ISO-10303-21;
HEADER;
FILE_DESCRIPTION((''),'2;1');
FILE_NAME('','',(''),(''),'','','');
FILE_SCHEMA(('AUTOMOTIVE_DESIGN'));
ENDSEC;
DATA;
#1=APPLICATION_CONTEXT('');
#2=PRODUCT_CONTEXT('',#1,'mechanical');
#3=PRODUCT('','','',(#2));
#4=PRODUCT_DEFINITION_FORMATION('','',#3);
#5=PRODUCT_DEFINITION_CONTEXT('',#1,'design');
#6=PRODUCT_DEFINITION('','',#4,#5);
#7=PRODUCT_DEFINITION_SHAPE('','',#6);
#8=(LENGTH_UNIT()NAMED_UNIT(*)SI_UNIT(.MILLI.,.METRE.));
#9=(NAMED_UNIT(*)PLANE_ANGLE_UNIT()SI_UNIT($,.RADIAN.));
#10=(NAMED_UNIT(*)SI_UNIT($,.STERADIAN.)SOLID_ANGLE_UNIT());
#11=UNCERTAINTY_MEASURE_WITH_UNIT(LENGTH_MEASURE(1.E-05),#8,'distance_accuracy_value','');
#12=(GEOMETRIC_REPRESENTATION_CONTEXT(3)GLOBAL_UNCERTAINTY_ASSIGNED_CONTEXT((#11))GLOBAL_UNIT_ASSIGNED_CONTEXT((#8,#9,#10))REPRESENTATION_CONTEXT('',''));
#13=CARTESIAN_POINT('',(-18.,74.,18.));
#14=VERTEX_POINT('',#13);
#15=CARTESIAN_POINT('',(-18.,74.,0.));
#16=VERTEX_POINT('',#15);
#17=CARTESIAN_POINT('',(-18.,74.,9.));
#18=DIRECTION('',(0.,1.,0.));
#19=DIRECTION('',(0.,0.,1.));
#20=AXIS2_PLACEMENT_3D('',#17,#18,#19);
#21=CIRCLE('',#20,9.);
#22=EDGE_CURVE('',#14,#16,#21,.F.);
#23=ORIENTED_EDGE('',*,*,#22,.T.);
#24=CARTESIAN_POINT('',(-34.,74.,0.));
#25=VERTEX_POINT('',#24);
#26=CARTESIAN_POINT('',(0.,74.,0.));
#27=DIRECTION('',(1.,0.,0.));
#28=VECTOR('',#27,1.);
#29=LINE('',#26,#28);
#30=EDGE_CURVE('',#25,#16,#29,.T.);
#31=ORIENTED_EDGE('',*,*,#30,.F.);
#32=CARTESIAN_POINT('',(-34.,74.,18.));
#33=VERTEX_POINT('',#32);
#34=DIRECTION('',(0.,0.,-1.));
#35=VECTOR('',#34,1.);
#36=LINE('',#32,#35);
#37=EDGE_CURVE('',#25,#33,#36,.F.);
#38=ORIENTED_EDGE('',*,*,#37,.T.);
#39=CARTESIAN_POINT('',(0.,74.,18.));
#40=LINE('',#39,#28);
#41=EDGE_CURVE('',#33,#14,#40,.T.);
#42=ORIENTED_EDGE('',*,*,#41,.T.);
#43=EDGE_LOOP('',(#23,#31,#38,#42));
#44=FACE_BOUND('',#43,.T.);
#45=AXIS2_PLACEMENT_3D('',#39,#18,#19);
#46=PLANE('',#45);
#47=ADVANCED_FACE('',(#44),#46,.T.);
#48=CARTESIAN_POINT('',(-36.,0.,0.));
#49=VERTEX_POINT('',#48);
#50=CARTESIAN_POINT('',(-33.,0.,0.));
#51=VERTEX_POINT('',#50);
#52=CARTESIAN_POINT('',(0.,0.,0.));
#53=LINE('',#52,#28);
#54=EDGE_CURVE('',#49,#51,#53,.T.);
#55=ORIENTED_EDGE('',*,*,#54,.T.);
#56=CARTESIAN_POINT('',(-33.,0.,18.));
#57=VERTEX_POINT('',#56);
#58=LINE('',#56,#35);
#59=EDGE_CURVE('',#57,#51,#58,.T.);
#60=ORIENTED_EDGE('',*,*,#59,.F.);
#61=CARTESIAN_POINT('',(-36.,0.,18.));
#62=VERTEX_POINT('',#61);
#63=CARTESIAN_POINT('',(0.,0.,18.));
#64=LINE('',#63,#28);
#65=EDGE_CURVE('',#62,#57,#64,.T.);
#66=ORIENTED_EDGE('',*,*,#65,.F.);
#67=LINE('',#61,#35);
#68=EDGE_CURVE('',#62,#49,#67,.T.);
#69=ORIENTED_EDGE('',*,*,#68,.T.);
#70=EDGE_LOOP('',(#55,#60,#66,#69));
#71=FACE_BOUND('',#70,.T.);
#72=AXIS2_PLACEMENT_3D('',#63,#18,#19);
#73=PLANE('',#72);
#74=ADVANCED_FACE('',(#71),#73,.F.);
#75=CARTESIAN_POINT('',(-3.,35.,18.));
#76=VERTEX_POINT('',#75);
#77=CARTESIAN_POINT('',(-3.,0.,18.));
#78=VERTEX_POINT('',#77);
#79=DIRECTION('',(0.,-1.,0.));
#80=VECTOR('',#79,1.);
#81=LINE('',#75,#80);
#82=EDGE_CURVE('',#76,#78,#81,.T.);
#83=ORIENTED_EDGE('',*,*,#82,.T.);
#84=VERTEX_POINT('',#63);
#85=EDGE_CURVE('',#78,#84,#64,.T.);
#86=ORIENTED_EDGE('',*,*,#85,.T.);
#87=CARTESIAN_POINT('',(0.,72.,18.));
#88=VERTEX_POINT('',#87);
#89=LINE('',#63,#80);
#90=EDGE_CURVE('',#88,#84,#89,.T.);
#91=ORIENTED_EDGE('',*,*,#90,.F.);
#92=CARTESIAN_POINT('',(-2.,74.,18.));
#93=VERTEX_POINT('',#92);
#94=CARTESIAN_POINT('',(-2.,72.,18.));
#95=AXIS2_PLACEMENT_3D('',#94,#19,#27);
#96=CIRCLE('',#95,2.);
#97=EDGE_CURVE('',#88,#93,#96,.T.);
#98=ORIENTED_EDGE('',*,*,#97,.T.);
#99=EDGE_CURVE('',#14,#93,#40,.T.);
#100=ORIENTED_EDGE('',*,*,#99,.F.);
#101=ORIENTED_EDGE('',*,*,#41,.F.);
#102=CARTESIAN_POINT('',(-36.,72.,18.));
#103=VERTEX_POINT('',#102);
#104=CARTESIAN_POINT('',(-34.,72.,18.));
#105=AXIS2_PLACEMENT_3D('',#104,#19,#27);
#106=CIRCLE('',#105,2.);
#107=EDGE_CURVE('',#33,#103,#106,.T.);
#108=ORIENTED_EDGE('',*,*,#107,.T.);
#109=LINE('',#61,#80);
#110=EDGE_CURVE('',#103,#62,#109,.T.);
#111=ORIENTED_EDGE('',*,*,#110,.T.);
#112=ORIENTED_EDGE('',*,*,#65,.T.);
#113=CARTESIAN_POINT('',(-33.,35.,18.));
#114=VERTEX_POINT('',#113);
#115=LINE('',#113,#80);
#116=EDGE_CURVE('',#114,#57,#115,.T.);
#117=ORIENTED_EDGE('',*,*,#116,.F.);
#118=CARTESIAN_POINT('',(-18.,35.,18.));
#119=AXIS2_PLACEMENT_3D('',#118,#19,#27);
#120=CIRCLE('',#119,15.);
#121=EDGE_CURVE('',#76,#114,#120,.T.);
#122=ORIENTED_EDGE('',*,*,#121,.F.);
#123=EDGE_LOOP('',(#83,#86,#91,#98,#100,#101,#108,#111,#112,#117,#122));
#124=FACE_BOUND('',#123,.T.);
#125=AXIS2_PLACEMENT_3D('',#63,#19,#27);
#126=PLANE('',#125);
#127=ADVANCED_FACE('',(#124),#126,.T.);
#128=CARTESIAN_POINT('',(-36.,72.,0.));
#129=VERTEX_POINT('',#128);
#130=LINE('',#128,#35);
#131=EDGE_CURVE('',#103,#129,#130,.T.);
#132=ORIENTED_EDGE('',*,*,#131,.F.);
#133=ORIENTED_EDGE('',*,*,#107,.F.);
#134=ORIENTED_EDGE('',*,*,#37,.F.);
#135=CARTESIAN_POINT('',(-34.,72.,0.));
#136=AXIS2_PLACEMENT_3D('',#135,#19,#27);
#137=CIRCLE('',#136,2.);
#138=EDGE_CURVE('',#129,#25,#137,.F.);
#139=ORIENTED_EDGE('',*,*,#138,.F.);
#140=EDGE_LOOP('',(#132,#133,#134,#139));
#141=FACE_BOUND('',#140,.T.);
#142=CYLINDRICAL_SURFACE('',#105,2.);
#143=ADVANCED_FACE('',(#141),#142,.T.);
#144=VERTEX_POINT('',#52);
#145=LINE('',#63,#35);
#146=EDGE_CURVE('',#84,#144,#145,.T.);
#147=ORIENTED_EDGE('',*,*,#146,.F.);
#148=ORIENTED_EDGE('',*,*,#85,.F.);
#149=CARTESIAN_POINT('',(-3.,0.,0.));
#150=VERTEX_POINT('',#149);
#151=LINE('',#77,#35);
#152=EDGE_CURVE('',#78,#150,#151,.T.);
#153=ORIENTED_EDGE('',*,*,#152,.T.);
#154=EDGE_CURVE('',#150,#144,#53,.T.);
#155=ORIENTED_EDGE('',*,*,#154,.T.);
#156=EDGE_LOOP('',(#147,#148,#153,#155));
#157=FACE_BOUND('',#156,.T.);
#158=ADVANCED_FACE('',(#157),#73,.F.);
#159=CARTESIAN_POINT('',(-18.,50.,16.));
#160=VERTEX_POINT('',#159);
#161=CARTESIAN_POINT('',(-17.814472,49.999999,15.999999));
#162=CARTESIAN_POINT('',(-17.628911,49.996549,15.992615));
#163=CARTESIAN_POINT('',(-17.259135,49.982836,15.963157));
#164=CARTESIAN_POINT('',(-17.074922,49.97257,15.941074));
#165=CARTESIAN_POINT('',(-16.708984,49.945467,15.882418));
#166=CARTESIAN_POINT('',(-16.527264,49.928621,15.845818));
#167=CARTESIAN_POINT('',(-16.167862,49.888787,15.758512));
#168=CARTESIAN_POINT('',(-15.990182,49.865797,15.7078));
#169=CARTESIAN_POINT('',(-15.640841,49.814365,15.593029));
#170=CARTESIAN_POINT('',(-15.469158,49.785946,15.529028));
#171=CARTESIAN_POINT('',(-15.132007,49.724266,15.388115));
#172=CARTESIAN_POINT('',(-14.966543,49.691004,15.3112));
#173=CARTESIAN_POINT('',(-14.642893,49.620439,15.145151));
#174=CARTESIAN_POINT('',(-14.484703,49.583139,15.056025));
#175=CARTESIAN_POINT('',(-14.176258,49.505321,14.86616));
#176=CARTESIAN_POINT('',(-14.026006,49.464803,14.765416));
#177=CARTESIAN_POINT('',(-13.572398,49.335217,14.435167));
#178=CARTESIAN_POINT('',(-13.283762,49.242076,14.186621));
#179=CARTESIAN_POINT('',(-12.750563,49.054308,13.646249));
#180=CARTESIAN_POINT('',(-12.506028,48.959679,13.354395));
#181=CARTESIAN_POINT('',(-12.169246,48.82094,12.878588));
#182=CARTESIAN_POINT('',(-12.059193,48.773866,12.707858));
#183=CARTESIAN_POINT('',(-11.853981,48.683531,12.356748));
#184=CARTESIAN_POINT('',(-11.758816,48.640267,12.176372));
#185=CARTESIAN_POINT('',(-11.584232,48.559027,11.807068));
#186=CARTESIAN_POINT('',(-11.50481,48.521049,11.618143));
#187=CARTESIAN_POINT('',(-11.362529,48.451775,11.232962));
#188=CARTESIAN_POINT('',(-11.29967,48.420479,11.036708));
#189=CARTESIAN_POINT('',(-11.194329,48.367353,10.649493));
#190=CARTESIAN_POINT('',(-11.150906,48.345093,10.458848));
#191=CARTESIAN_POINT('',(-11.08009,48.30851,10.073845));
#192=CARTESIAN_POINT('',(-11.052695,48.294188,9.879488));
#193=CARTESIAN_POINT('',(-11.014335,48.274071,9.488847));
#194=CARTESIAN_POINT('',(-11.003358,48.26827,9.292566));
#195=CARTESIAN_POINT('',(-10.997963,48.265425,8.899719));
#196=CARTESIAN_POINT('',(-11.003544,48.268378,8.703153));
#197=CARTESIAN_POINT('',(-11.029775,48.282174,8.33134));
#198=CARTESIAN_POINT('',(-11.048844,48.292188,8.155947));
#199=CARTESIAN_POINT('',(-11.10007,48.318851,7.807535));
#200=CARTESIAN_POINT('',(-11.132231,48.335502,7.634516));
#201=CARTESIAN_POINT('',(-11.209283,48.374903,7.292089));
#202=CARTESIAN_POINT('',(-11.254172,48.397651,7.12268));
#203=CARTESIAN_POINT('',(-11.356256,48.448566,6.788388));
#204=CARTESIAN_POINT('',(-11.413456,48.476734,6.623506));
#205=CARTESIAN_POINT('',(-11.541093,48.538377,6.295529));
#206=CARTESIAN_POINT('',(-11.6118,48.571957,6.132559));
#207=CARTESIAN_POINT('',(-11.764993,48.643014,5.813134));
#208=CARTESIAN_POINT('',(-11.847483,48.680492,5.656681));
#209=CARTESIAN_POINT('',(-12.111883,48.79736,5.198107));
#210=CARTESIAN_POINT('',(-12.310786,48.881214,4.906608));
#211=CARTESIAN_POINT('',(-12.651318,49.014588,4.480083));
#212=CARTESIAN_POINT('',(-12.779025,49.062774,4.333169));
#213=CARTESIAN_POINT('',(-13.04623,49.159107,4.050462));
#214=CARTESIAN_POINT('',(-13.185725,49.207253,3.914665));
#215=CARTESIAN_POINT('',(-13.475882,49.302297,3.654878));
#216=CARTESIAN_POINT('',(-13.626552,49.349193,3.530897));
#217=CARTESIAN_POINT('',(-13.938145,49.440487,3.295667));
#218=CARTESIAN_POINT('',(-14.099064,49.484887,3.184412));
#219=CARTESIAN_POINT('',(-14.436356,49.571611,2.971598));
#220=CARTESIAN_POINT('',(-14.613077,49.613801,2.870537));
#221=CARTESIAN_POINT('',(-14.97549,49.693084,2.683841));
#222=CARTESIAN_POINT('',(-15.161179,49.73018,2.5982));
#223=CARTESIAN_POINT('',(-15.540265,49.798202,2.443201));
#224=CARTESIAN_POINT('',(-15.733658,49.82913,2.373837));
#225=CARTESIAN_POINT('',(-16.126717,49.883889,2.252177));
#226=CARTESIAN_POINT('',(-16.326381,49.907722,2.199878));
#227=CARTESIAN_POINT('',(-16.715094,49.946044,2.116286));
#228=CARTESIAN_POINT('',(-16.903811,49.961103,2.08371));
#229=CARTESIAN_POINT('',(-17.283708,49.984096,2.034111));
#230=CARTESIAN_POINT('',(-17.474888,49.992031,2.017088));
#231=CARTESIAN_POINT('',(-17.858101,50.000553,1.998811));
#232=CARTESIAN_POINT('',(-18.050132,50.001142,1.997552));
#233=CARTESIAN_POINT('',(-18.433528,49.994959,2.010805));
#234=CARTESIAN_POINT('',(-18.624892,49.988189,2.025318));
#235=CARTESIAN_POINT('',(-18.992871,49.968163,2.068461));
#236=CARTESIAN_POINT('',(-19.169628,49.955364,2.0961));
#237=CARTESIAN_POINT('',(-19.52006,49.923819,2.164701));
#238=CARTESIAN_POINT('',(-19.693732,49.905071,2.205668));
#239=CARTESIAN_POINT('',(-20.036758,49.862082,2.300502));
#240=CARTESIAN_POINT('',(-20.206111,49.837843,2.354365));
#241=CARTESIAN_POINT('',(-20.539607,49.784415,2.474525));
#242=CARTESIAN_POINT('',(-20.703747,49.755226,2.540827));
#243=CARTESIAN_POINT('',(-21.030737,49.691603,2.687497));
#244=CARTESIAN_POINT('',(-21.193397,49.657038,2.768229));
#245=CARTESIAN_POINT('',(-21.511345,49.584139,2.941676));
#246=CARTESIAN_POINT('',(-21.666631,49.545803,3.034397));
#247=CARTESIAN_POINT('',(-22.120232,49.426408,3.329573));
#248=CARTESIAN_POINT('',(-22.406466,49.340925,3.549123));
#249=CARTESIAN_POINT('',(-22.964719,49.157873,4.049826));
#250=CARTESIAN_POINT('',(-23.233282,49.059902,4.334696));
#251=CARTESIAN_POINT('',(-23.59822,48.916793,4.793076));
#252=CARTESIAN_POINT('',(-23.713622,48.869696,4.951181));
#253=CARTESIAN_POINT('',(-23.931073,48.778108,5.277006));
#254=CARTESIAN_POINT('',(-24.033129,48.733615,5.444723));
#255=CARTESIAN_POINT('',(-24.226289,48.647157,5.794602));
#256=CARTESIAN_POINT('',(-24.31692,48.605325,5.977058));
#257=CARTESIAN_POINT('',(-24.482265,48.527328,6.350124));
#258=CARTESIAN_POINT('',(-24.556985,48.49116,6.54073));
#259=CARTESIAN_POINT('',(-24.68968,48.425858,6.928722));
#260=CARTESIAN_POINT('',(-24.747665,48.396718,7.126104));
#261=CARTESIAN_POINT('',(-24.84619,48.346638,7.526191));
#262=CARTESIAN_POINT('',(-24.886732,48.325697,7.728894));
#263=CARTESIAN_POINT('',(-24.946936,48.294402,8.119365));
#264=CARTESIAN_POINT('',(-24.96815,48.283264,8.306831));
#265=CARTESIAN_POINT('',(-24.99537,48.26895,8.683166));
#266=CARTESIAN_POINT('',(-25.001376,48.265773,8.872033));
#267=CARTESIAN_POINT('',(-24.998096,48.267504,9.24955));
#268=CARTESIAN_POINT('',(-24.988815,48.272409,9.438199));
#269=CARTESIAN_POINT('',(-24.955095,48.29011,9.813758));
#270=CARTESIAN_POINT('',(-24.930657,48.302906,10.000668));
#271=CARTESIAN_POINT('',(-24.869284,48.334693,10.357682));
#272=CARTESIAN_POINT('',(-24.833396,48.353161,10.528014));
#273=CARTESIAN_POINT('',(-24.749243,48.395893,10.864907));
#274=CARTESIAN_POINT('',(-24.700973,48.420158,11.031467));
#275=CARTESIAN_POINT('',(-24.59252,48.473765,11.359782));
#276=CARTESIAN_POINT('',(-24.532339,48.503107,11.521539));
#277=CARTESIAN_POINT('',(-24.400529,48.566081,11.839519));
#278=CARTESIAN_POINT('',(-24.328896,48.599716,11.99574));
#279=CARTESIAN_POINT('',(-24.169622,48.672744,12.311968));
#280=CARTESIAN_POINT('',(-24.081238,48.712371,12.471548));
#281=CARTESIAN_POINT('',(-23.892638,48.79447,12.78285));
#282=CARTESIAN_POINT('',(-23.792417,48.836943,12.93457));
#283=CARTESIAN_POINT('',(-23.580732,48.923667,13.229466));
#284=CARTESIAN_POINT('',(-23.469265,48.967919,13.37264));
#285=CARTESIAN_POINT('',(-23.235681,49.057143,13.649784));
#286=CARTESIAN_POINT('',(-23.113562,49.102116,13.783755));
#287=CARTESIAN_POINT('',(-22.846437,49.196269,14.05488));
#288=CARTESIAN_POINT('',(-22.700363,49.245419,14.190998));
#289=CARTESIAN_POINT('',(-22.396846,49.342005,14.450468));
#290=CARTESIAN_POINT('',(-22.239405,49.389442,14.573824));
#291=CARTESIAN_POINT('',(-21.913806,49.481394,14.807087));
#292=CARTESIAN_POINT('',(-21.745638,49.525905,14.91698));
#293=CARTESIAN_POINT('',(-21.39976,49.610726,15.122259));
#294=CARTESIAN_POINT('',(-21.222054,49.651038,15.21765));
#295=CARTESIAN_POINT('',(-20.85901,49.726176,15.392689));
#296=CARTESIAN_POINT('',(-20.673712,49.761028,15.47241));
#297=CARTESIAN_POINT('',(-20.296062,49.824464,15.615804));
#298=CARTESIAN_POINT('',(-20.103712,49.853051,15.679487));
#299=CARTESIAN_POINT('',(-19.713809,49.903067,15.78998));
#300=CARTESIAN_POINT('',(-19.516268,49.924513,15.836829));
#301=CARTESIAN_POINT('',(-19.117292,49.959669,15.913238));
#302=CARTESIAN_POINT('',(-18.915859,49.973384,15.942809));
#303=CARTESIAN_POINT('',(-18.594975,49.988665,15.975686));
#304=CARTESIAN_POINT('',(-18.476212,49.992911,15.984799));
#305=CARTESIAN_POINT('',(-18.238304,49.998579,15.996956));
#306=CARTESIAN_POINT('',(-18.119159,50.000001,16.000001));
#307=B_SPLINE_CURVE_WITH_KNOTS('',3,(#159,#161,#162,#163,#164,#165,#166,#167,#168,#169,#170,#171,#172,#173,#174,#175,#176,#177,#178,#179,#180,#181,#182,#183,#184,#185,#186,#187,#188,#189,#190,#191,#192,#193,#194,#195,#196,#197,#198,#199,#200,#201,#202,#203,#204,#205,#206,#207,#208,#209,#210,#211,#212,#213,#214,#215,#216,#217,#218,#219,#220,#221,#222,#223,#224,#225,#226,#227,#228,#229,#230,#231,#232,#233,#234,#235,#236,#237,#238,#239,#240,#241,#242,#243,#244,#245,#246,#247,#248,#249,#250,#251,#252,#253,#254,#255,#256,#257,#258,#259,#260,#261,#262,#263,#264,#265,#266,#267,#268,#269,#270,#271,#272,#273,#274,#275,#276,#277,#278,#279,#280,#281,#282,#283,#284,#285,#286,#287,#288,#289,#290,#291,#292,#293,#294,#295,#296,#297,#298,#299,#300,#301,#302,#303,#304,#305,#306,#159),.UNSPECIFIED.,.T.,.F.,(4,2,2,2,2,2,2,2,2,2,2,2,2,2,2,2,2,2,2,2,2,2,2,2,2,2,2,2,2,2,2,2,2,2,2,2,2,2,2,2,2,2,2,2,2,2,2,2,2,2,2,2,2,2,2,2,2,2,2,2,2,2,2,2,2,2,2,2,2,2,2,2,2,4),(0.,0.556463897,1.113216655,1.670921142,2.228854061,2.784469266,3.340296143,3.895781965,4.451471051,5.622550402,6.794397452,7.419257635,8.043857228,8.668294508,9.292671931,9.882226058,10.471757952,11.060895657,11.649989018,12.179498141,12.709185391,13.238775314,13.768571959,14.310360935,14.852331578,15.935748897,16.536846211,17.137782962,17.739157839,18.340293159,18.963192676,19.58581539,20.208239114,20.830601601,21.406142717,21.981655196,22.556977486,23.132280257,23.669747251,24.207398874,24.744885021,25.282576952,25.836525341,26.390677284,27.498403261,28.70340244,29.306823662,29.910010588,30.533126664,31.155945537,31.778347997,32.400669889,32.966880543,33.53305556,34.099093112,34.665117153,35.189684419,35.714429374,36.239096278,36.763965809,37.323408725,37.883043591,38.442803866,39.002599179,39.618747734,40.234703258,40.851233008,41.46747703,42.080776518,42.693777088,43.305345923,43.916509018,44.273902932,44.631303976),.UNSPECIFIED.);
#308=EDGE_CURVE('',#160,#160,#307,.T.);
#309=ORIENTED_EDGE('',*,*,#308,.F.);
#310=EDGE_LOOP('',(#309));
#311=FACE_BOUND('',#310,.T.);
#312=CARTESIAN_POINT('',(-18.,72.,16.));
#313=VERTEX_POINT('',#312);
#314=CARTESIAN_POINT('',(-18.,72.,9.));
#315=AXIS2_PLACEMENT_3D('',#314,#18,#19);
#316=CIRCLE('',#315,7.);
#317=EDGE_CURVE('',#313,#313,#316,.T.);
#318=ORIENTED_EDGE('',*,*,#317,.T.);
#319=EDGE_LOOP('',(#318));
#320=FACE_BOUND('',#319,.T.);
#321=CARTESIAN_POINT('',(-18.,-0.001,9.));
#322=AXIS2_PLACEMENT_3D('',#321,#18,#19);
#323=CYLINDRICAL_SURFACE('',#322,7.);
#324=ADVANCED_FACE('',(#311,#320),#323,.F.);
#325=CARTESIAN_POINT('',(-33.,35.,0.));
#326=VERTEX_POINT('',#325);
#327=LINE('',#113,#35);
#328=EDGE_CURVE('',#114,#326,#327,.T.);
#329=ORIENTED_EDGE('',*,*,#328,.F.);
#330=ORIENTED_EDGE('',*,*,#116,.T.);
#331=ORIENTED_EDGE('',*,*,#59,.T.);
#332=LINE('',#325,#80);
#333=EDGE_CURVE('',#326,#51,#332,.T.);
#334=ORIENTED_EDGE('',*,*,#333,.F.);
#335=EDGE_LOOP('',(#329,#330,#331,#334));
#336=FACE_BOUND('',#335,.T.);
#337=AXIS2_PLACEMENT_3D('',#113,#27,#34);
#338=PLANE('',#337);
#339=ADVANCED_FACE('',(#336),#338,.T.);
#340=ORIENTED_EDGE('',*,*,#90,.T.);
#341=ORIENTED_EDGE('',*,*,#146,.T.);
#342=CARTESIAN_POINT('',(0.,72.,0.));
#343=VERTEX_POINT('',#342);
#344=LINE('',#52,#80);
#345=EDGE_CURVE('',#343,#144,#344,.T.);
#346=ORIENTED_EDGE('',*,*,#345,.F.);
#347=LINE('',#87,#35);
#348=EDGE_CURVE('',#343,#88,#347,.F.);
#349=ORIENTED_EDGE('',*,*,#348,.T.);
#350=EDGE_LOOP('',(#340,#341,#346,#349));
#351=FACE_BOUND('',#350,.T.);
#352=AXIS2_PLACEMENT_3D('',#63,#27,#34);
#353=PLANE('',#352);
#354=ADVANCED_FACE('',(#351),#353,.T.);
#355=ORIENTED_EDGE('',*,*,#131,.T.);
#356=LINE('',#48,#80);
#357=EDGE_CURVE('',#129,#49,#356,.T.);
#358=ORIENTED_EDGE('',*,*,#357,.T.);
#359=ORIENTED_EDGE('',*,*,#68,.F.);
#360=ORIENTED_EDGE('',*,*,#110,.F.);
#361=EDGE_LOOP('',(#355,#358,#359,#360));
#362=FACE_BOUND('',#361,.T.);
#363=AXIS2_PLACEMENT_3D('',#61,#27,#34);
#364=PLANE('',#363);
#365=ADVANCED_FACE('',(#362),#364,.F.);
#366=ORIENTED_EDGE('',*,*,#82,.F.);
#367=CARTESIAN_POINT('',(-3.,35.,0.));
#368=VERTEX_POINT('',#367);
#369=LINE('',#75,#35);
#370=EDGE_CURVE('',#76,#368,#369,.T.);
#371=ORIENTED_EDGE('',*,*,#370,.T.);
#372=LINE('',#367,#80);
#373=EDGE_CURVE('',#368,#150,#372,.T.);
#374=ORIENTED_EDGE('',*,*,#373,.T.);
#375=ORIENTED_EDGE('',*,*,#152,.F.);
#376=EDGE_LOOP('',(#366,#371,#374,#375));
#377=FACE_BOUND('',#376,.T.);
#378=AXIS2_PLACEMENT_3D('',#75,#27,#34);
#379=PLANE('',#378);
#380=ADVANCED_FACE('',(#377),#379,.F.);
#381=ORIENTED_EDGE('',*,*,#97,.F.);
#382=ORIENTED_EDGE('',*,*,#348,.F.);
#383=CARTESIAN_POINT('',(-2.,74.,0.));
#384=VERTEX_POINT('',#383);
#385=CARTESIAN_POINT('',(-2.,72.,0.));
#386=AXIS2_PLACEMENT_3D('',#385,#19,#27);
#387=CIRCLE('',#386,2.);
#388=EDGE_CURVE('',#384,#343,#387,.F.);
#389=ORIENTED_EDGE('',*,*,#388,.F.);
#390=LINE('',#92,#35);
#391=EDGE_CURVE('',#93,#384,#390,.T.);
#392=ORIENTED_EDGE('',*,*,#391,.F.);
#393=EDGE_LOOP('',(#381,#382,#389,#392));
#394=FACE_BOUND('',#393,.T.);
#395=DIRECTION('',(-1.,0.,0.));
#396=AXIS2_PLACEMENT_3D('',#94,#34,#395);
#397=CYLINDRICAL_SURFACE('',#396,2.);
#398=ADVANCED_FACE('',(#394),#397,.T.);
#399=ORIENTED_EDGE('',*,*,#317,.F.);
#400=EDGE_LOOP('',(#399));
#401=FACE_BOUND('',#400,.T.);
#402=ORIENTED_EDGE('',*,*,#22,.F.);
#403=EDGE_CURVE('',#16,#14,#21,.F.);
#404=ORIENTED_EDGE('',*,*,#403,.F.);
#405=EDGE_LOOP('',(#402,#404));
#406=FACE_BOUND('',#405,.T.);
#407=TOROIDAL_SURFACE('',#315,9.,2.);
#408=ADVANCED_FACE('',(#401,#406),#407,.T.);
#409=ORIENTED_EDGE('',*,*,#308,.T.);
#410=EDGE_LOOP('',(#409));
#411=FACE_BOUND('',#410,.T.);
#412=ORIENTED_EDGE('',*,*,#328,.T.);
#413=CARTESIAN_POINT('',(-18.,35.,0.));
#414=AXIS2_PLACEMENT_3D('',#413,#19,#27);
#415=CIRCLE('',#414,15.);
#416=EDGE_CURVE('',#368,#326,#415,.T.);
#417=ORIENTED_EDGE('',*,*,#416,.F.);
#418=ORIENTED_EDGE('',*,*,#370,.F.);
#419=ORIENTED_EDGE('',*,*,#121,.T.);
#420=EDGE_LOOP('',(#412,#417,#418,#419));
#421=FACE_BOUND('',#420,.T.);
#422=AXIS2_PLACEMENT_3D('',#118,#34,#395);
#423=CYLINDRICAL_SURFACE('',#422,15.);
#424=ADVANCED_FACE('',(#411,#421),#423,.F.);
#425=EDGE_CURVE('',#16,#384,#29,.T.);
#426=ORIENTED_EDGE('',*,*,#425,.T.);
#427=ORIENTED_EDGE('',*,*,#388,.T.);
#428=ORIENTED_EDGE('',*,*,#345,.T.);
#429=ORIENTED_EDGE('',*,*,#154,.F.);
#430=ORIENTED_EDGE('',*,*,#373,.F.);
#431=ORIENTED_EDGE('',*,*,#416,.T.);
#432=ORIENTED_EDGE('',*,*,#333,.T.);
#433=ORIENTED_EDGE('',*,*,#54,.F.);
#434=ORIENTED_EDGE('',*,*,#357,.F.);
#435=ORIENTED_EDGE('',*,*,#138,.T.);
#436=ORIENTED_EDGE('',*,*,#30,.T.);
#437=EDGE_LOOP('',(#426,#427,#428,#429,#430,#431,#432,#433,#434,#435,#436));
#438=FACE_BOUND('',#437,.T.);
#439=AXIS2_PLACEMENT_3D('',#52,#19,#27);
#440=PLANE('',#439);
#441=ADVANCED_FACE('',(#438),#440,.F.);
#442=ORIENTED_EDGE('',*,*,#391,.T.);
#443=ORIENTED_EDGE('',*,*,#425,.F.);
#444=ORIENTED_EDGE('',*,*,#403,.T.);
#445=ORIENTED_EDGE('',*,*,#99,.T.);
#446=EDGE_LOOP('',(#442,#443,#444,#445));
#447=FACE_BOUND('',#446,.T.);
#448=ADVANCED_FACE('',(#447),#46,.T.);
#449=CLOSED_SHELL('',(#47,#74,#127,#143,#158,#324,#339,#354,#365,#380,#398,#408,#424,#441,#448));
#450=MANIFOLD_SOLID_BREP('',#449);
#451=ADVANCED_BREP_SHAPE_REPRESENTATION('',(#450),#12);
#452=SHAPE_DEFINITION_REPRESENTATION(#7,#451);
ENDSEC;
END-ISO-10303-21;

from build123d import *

# Parameters (mm, degrees)
BOSS_EXTRUDE1_DEPTH     = 18
CUT_EXTRUDE1_REACH      = 86.238
CUT_EXTRUDE1_END_RADIUS = 15
SKETCH3_R               = 7
FILLET1_R               = 2
FILLET2_R               = 2


with BuildPart() as part:
    # Sketch2 → Boss-Extrude1 (new body)
    with BuildSketch(Plane.XY):
        with BuildLine():
            Line((-33.38706816, 74), (-36, 74))
            Line((-36, 74), (-36, 0))
            Line((-36, 0), (-33, 0))
            Line((-33, 0), (-33, 35))
            ThreePointArc((-33, 35), (-18, 50), (-3, 35))
            Line((-3, 35), (-3, 0))
            Line((-3, 0), (0, 0))
            Line((0, 0), (0, 74))
            Line((0, 74), (-12.61679677, 74))
            Line((-12.61679677, 74), (-33.38706816, 74))
        make_face()
    extrude(amount=BOSS_EXTRUDE1_DEPTH)

    # Cut-Extrude1: up to this cylinder (the profile starts outside it)
    cut_extrude1_end = Plane(origin=(-18, 35, 9), z_dir=(0, 0, -1)) * Cylinder(CUT_EXTRUDE1_END_RADIUS, 203.476, mode=Mode.PRIVATE)
    # Sketch3 → Cut-Extrude1 (cut, up to the surface)
    with BuildSketch(Plane(origin=(0, 74, 0), x_dir=(1, 0, 0), z_dir=(0, 1, 0)), mode=Mode.PRIVATE) as cut_extrude1_sk1:
        with Locations(Location((-18, -9, 0), (0, 0, 270))):
            Circle(SKETCH3_R)
    cut_extrude1_tool1 = extrude(cut_extrude1_sk1.sketch, amount=-CUT_EXTRUDE1_REACH, mode=Mode.PRIVATE) - cut_extrude1_end
    add(cut_extrude1_tool1.solids().sort_by_distance((-18, 74, 9))[0], mode=Mode.SUBTRACT)

    # Fillet1
    fillet1_edges = [part.edges().sort_by_distance(p)[0] for p in [
        (-18, 74, 2),
    ]]
    fillet(fillet1_edges, radius=FILLET1_R - 0.0001)  # a hair under: the kernel refuses the full size

    # Fillet2
    fillet2_edges = [part.edges().sort_by_distance(p)[0] for p in [
        (-36, 74, 9),
        (0, 74, 9),
    ]]
    fillet(fillet2_edges, radius=FILLET2_R)


solid = part.part
